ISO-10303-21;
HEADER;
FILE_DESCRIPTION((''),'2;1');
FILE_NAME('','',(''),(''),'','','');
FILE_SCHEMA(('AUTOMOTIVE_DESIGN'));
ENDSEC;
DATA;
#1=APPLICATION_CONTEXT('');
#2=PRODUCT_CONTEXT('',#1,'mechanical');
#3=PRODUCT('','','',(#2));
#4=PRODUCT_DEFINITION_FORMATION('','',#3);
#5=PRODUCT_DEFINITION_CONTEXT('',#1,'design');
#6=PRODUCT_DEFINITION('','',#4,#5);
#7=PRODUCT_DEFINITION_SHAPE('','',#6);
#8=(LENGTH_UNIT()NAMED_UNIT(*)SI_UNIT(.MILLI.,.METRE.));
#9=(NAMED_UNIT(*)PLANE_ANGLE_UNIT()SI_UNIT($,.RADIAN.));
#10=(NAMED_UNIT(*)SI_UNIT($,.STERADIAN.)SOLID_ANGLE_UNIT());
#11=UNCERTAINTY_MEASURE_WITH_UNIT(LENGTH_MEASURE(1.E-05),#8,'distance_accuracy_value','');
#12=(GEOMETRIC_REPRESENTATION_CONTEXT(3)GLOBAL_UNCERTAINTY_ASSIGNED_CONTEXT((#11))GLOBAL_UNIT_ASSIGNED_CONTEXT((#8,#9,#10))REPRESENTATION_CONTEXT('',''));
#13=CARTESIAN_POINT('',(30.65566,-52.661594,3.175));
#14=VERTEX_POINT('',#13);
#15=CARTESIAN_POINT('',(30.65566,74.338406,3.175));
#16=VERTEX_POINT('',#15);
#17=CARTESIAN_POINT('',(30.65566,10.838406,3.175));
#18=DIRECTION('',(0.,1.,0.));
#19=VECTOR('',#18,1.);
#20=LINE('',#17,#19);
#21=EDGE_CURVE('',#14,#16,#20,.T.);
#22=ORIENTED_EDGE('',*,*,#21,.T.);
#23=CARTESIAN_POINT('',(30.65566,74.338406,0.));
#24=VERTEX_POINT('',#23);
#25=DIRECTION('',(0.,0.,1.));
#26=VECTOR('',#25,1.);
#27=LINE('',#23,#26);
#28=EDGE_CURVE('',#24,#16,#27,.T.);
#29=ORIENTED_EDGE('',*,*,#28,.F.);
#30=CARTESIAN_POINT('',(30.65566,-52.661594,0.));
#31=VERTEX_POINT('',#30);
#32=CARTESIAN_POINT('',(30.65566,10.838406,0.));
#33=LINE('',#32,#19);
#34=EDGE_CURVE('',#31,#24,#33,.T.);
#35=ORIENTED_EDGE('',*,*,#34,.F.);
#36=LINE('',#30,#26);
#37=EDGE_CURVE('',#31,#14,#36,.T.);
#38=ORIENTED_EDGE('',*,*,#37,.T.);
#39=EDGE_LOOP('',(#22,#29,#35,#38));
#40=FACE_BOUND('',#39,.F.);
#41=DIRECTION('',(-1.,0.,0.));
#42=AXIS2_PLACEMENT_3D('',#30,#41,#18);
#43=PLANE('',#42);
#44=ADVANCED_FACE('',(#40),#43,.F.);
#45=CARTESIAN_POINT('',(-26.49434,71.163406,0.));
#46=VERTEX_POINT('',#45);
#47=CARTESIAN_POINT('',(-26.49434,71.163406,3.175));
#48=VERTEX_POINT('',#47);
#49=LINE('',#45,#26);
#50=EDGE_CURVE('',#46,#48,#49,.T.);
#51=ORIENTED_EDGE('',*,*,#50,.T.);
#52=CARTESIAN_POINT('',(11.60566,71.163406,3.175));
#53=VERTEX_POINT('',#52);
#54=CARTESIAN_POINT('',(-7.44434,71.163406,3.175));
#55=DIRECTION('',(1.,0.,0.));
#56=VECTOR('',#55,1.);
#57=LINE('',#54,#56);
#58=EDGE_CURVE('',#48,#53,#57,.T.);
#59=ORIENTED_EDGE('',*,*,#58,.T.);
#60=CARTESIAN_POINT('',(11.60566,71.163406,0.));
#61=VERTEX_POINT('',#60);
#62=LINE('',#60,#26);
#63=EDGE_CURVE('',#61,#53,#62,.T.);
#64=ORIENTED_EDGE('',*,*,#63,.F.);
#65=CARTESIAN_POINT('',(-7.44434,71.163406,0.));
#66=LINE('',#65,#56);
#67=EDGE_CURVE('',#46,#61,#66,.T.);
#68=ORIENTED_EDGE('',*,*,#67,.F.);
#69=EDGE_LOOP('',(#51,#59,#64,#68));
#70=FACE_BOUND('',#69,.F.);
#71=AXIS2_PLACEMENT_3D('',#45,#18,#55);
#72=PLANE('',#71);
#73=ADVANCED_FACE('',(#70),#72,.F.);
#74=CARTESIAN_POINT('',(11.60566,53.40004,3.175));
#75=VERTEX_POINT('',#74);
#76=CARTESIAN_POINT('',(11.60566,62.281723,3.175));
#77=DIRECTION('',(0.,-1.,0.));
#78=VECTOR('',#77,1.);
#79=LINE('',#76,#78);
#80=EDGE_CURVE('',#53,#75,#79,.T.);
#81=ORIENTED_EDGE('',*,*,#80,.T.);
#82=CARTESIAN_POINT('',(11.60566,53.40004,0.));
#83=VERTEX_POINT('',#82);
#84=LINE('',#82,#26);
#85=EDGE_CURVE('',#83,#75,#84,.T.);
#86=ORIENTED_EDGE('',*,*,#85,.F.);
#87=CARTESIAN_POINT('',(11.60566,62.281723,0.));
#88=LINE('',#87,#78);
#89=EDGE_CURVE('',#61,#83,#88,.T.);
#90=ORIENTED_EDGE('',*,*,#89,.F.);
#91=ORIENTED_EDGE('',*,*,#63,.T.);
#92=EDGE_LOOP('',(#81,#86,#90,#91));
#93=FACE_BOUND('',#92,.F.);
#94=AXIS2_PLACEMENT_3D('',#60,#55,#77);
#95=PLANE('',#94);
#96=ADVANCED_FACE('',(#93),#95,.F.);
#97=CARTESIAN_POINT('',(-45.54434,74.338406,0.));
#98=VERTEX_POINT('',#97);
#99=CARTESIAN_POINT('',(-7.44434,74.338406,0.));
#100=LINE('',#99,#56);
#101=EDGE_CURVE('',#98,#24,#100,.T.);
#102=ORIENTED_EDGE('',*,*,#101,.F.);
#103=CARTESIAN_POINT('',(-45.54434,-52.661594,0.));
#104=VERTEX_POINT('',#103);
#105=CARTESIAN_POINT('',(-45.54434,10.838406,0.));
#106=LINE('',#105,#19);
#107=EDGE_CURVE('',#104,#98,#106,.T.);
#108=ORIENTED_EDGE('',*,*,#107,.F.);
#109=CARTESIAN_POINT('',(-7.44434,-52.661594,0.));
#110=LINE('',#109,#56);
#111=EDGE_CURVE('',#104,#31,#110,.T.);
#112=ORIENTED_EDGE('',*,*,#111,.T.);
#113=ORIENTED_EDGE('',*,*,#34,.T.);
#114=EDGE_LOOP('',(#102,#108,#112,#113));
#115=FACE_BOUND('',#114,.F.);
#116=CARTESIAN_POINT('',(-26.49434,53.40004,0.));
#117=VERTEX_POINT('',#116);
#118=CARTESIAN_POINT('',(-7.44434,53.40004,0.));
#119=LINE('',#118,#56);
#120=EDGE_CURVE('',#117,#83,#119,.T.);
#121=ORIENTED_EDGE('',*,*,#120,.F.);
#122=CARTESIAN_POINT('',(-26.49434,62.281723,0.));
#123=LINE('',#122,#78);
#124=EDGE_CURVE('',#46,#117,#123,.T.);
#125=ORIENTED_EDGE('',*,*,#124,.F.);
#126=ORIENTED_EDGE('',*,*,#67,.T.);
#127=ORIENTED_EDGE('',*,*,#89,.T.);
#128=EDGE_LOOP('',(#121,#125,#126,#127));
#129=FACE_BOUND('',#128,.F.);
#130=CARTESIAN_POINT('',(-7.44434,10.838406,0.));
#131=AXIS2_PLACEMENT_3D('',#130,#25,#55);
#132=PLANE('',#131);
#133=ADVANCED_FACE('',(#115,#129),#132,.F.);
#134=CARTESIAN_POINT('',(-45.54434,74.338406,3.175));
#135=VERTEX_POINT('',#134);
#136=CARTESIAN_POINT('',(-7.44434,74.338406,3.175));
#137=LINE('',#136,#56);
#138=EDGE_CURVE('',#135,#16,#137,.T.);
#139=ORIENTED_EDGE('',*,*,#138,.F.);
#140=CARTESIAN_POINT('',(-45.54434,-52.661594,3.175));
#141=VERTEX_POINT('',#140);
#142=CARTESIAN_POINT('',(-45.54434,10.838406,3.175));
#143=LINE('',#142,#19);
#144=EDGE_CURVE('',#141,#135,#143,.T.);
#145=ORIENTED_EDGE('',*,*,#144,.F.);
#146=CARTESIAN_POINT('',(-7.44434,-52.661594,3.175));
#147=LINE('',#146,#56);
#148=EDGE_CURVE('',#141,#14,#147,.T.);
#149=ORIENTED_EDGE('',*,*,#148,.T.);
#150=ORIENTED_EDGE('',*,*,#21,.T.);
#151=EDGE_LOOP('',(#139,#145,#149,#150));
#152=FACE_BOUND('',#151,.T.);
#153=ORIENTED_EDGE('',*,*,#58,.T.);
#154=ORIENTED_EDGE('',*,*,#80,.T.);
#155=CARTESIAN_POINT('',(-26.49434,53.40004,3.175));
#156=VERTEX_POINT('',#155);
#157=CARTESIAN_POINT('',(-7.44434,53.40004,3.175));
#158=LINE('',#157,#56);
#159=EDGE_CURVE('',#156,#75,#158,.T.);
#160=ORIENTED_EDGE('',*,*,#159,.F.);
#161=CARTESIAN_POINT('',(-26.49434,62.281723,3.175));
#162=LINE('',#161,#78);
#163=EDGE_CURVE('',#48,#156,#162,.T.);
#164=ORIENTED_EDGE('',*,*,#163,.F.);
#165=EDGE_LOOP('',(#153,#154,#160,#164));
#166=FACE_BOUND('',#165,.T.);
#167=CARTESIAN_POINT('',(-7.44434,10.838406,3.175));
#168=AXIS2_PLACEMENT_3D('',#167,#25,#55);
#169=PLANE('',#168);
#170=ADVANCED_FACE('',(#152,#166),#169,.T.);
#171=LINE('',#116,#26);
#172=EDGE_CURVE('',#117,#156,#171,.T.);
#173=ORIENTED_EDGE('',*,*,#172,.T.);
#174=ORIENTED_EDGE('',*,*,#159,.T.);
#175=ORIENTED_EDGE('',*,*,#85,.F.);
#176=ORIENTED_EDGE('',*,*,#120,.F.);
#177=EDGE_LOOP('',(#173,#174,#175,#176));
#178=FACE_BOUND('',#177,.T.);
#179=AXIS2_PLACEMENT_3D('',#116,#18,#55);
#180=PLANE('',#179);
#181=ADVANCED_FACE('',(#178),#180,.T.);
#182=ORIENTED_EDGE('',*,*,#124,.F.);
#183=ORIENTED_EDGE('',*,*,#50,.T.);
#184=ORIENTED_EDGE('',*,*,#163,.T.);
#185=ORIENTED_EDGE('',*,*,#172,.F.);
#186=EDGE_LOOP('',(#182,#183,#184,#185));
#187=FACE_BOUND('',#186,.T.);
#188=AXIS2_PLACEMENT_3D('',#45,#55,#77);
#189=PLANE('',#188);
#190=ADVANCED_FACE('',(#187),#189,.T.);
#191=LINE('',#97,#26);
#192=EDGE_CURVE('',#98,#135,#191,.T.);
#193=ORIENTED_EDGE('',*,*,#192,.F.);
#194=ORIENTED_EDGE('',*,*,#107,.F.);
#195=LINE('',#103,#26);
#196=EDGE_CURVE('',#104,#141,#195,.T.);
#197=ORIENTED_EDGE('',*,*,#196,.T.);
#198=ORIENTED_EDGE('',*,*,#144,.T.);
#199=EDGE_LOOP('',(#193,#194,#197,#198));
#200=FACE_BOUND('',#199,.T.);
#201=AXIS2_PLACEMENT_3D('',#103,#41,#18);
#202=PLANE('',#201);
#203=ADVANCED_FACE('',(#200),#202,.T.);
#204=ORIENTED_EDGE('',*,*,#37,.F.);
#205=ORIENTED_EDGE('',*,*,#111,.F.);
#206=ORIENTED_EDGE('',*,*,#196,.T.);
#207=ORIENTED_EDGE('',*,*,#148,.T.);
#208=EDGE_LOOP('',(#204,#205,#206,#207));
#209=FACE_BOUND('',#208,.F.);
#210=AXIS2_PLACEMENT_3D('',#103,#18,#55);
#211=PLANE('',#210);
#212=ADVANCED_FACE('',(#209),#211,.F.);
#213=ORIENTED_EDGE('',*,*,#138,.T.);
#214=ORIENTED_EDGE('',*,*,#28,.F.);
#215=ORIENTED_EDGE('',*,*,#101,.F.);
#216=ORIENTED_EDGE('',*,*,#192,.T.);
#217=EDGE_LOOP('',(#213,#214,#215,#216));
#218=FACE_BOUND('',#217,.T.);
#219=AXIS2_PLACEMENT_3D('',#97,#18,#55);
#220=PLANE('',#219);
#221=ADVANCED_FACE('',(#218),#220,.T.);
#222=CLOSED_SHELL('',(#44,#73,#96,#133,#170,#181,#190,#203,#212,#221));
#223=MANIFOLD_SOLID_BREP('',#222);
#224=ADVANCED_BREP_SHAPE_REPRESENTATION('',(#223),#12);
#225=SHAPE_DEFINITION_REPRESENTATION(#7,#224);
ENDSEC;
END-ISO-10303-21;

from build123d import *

# Parameters (mm, degrees)
F0_W     = 76.2
F0_H     = 127
F1_DEPTH = 3.175
F2_W     = 38.1
F2_H     = 17.7633663237
F3_DEPTH = 3.175


# Not quite as in the source:
# - a length typed as a fraction of an inch, garbled in the dataset ("3 / 203.2 mm" for 3/8 in), is restored


with BuildPart() as f1:
    # F0 (on Top) → F1 (new body)
    with BuildSketch(Plane.XY):
        with Locations((-7.4443402648, 10.8384059966)):
            Rectangle(F0_W, F0_H)
    extrude(amount=F1_DEPTH)

    # F2 (on face) → F3 (cut)
    with BuildSketch(Plane(origin=(0, 0, 0), x_dir=(1, 0, 0), z_dir=(0, 0, -1))):
        with Locations((-7.4443402648, -62.2817228347)):
            Rectangle(F2_W, F2_H)
    extrude(amount=-F3_DEPTH, mode=Mode.SUBTRACT)


solid = f1.part
